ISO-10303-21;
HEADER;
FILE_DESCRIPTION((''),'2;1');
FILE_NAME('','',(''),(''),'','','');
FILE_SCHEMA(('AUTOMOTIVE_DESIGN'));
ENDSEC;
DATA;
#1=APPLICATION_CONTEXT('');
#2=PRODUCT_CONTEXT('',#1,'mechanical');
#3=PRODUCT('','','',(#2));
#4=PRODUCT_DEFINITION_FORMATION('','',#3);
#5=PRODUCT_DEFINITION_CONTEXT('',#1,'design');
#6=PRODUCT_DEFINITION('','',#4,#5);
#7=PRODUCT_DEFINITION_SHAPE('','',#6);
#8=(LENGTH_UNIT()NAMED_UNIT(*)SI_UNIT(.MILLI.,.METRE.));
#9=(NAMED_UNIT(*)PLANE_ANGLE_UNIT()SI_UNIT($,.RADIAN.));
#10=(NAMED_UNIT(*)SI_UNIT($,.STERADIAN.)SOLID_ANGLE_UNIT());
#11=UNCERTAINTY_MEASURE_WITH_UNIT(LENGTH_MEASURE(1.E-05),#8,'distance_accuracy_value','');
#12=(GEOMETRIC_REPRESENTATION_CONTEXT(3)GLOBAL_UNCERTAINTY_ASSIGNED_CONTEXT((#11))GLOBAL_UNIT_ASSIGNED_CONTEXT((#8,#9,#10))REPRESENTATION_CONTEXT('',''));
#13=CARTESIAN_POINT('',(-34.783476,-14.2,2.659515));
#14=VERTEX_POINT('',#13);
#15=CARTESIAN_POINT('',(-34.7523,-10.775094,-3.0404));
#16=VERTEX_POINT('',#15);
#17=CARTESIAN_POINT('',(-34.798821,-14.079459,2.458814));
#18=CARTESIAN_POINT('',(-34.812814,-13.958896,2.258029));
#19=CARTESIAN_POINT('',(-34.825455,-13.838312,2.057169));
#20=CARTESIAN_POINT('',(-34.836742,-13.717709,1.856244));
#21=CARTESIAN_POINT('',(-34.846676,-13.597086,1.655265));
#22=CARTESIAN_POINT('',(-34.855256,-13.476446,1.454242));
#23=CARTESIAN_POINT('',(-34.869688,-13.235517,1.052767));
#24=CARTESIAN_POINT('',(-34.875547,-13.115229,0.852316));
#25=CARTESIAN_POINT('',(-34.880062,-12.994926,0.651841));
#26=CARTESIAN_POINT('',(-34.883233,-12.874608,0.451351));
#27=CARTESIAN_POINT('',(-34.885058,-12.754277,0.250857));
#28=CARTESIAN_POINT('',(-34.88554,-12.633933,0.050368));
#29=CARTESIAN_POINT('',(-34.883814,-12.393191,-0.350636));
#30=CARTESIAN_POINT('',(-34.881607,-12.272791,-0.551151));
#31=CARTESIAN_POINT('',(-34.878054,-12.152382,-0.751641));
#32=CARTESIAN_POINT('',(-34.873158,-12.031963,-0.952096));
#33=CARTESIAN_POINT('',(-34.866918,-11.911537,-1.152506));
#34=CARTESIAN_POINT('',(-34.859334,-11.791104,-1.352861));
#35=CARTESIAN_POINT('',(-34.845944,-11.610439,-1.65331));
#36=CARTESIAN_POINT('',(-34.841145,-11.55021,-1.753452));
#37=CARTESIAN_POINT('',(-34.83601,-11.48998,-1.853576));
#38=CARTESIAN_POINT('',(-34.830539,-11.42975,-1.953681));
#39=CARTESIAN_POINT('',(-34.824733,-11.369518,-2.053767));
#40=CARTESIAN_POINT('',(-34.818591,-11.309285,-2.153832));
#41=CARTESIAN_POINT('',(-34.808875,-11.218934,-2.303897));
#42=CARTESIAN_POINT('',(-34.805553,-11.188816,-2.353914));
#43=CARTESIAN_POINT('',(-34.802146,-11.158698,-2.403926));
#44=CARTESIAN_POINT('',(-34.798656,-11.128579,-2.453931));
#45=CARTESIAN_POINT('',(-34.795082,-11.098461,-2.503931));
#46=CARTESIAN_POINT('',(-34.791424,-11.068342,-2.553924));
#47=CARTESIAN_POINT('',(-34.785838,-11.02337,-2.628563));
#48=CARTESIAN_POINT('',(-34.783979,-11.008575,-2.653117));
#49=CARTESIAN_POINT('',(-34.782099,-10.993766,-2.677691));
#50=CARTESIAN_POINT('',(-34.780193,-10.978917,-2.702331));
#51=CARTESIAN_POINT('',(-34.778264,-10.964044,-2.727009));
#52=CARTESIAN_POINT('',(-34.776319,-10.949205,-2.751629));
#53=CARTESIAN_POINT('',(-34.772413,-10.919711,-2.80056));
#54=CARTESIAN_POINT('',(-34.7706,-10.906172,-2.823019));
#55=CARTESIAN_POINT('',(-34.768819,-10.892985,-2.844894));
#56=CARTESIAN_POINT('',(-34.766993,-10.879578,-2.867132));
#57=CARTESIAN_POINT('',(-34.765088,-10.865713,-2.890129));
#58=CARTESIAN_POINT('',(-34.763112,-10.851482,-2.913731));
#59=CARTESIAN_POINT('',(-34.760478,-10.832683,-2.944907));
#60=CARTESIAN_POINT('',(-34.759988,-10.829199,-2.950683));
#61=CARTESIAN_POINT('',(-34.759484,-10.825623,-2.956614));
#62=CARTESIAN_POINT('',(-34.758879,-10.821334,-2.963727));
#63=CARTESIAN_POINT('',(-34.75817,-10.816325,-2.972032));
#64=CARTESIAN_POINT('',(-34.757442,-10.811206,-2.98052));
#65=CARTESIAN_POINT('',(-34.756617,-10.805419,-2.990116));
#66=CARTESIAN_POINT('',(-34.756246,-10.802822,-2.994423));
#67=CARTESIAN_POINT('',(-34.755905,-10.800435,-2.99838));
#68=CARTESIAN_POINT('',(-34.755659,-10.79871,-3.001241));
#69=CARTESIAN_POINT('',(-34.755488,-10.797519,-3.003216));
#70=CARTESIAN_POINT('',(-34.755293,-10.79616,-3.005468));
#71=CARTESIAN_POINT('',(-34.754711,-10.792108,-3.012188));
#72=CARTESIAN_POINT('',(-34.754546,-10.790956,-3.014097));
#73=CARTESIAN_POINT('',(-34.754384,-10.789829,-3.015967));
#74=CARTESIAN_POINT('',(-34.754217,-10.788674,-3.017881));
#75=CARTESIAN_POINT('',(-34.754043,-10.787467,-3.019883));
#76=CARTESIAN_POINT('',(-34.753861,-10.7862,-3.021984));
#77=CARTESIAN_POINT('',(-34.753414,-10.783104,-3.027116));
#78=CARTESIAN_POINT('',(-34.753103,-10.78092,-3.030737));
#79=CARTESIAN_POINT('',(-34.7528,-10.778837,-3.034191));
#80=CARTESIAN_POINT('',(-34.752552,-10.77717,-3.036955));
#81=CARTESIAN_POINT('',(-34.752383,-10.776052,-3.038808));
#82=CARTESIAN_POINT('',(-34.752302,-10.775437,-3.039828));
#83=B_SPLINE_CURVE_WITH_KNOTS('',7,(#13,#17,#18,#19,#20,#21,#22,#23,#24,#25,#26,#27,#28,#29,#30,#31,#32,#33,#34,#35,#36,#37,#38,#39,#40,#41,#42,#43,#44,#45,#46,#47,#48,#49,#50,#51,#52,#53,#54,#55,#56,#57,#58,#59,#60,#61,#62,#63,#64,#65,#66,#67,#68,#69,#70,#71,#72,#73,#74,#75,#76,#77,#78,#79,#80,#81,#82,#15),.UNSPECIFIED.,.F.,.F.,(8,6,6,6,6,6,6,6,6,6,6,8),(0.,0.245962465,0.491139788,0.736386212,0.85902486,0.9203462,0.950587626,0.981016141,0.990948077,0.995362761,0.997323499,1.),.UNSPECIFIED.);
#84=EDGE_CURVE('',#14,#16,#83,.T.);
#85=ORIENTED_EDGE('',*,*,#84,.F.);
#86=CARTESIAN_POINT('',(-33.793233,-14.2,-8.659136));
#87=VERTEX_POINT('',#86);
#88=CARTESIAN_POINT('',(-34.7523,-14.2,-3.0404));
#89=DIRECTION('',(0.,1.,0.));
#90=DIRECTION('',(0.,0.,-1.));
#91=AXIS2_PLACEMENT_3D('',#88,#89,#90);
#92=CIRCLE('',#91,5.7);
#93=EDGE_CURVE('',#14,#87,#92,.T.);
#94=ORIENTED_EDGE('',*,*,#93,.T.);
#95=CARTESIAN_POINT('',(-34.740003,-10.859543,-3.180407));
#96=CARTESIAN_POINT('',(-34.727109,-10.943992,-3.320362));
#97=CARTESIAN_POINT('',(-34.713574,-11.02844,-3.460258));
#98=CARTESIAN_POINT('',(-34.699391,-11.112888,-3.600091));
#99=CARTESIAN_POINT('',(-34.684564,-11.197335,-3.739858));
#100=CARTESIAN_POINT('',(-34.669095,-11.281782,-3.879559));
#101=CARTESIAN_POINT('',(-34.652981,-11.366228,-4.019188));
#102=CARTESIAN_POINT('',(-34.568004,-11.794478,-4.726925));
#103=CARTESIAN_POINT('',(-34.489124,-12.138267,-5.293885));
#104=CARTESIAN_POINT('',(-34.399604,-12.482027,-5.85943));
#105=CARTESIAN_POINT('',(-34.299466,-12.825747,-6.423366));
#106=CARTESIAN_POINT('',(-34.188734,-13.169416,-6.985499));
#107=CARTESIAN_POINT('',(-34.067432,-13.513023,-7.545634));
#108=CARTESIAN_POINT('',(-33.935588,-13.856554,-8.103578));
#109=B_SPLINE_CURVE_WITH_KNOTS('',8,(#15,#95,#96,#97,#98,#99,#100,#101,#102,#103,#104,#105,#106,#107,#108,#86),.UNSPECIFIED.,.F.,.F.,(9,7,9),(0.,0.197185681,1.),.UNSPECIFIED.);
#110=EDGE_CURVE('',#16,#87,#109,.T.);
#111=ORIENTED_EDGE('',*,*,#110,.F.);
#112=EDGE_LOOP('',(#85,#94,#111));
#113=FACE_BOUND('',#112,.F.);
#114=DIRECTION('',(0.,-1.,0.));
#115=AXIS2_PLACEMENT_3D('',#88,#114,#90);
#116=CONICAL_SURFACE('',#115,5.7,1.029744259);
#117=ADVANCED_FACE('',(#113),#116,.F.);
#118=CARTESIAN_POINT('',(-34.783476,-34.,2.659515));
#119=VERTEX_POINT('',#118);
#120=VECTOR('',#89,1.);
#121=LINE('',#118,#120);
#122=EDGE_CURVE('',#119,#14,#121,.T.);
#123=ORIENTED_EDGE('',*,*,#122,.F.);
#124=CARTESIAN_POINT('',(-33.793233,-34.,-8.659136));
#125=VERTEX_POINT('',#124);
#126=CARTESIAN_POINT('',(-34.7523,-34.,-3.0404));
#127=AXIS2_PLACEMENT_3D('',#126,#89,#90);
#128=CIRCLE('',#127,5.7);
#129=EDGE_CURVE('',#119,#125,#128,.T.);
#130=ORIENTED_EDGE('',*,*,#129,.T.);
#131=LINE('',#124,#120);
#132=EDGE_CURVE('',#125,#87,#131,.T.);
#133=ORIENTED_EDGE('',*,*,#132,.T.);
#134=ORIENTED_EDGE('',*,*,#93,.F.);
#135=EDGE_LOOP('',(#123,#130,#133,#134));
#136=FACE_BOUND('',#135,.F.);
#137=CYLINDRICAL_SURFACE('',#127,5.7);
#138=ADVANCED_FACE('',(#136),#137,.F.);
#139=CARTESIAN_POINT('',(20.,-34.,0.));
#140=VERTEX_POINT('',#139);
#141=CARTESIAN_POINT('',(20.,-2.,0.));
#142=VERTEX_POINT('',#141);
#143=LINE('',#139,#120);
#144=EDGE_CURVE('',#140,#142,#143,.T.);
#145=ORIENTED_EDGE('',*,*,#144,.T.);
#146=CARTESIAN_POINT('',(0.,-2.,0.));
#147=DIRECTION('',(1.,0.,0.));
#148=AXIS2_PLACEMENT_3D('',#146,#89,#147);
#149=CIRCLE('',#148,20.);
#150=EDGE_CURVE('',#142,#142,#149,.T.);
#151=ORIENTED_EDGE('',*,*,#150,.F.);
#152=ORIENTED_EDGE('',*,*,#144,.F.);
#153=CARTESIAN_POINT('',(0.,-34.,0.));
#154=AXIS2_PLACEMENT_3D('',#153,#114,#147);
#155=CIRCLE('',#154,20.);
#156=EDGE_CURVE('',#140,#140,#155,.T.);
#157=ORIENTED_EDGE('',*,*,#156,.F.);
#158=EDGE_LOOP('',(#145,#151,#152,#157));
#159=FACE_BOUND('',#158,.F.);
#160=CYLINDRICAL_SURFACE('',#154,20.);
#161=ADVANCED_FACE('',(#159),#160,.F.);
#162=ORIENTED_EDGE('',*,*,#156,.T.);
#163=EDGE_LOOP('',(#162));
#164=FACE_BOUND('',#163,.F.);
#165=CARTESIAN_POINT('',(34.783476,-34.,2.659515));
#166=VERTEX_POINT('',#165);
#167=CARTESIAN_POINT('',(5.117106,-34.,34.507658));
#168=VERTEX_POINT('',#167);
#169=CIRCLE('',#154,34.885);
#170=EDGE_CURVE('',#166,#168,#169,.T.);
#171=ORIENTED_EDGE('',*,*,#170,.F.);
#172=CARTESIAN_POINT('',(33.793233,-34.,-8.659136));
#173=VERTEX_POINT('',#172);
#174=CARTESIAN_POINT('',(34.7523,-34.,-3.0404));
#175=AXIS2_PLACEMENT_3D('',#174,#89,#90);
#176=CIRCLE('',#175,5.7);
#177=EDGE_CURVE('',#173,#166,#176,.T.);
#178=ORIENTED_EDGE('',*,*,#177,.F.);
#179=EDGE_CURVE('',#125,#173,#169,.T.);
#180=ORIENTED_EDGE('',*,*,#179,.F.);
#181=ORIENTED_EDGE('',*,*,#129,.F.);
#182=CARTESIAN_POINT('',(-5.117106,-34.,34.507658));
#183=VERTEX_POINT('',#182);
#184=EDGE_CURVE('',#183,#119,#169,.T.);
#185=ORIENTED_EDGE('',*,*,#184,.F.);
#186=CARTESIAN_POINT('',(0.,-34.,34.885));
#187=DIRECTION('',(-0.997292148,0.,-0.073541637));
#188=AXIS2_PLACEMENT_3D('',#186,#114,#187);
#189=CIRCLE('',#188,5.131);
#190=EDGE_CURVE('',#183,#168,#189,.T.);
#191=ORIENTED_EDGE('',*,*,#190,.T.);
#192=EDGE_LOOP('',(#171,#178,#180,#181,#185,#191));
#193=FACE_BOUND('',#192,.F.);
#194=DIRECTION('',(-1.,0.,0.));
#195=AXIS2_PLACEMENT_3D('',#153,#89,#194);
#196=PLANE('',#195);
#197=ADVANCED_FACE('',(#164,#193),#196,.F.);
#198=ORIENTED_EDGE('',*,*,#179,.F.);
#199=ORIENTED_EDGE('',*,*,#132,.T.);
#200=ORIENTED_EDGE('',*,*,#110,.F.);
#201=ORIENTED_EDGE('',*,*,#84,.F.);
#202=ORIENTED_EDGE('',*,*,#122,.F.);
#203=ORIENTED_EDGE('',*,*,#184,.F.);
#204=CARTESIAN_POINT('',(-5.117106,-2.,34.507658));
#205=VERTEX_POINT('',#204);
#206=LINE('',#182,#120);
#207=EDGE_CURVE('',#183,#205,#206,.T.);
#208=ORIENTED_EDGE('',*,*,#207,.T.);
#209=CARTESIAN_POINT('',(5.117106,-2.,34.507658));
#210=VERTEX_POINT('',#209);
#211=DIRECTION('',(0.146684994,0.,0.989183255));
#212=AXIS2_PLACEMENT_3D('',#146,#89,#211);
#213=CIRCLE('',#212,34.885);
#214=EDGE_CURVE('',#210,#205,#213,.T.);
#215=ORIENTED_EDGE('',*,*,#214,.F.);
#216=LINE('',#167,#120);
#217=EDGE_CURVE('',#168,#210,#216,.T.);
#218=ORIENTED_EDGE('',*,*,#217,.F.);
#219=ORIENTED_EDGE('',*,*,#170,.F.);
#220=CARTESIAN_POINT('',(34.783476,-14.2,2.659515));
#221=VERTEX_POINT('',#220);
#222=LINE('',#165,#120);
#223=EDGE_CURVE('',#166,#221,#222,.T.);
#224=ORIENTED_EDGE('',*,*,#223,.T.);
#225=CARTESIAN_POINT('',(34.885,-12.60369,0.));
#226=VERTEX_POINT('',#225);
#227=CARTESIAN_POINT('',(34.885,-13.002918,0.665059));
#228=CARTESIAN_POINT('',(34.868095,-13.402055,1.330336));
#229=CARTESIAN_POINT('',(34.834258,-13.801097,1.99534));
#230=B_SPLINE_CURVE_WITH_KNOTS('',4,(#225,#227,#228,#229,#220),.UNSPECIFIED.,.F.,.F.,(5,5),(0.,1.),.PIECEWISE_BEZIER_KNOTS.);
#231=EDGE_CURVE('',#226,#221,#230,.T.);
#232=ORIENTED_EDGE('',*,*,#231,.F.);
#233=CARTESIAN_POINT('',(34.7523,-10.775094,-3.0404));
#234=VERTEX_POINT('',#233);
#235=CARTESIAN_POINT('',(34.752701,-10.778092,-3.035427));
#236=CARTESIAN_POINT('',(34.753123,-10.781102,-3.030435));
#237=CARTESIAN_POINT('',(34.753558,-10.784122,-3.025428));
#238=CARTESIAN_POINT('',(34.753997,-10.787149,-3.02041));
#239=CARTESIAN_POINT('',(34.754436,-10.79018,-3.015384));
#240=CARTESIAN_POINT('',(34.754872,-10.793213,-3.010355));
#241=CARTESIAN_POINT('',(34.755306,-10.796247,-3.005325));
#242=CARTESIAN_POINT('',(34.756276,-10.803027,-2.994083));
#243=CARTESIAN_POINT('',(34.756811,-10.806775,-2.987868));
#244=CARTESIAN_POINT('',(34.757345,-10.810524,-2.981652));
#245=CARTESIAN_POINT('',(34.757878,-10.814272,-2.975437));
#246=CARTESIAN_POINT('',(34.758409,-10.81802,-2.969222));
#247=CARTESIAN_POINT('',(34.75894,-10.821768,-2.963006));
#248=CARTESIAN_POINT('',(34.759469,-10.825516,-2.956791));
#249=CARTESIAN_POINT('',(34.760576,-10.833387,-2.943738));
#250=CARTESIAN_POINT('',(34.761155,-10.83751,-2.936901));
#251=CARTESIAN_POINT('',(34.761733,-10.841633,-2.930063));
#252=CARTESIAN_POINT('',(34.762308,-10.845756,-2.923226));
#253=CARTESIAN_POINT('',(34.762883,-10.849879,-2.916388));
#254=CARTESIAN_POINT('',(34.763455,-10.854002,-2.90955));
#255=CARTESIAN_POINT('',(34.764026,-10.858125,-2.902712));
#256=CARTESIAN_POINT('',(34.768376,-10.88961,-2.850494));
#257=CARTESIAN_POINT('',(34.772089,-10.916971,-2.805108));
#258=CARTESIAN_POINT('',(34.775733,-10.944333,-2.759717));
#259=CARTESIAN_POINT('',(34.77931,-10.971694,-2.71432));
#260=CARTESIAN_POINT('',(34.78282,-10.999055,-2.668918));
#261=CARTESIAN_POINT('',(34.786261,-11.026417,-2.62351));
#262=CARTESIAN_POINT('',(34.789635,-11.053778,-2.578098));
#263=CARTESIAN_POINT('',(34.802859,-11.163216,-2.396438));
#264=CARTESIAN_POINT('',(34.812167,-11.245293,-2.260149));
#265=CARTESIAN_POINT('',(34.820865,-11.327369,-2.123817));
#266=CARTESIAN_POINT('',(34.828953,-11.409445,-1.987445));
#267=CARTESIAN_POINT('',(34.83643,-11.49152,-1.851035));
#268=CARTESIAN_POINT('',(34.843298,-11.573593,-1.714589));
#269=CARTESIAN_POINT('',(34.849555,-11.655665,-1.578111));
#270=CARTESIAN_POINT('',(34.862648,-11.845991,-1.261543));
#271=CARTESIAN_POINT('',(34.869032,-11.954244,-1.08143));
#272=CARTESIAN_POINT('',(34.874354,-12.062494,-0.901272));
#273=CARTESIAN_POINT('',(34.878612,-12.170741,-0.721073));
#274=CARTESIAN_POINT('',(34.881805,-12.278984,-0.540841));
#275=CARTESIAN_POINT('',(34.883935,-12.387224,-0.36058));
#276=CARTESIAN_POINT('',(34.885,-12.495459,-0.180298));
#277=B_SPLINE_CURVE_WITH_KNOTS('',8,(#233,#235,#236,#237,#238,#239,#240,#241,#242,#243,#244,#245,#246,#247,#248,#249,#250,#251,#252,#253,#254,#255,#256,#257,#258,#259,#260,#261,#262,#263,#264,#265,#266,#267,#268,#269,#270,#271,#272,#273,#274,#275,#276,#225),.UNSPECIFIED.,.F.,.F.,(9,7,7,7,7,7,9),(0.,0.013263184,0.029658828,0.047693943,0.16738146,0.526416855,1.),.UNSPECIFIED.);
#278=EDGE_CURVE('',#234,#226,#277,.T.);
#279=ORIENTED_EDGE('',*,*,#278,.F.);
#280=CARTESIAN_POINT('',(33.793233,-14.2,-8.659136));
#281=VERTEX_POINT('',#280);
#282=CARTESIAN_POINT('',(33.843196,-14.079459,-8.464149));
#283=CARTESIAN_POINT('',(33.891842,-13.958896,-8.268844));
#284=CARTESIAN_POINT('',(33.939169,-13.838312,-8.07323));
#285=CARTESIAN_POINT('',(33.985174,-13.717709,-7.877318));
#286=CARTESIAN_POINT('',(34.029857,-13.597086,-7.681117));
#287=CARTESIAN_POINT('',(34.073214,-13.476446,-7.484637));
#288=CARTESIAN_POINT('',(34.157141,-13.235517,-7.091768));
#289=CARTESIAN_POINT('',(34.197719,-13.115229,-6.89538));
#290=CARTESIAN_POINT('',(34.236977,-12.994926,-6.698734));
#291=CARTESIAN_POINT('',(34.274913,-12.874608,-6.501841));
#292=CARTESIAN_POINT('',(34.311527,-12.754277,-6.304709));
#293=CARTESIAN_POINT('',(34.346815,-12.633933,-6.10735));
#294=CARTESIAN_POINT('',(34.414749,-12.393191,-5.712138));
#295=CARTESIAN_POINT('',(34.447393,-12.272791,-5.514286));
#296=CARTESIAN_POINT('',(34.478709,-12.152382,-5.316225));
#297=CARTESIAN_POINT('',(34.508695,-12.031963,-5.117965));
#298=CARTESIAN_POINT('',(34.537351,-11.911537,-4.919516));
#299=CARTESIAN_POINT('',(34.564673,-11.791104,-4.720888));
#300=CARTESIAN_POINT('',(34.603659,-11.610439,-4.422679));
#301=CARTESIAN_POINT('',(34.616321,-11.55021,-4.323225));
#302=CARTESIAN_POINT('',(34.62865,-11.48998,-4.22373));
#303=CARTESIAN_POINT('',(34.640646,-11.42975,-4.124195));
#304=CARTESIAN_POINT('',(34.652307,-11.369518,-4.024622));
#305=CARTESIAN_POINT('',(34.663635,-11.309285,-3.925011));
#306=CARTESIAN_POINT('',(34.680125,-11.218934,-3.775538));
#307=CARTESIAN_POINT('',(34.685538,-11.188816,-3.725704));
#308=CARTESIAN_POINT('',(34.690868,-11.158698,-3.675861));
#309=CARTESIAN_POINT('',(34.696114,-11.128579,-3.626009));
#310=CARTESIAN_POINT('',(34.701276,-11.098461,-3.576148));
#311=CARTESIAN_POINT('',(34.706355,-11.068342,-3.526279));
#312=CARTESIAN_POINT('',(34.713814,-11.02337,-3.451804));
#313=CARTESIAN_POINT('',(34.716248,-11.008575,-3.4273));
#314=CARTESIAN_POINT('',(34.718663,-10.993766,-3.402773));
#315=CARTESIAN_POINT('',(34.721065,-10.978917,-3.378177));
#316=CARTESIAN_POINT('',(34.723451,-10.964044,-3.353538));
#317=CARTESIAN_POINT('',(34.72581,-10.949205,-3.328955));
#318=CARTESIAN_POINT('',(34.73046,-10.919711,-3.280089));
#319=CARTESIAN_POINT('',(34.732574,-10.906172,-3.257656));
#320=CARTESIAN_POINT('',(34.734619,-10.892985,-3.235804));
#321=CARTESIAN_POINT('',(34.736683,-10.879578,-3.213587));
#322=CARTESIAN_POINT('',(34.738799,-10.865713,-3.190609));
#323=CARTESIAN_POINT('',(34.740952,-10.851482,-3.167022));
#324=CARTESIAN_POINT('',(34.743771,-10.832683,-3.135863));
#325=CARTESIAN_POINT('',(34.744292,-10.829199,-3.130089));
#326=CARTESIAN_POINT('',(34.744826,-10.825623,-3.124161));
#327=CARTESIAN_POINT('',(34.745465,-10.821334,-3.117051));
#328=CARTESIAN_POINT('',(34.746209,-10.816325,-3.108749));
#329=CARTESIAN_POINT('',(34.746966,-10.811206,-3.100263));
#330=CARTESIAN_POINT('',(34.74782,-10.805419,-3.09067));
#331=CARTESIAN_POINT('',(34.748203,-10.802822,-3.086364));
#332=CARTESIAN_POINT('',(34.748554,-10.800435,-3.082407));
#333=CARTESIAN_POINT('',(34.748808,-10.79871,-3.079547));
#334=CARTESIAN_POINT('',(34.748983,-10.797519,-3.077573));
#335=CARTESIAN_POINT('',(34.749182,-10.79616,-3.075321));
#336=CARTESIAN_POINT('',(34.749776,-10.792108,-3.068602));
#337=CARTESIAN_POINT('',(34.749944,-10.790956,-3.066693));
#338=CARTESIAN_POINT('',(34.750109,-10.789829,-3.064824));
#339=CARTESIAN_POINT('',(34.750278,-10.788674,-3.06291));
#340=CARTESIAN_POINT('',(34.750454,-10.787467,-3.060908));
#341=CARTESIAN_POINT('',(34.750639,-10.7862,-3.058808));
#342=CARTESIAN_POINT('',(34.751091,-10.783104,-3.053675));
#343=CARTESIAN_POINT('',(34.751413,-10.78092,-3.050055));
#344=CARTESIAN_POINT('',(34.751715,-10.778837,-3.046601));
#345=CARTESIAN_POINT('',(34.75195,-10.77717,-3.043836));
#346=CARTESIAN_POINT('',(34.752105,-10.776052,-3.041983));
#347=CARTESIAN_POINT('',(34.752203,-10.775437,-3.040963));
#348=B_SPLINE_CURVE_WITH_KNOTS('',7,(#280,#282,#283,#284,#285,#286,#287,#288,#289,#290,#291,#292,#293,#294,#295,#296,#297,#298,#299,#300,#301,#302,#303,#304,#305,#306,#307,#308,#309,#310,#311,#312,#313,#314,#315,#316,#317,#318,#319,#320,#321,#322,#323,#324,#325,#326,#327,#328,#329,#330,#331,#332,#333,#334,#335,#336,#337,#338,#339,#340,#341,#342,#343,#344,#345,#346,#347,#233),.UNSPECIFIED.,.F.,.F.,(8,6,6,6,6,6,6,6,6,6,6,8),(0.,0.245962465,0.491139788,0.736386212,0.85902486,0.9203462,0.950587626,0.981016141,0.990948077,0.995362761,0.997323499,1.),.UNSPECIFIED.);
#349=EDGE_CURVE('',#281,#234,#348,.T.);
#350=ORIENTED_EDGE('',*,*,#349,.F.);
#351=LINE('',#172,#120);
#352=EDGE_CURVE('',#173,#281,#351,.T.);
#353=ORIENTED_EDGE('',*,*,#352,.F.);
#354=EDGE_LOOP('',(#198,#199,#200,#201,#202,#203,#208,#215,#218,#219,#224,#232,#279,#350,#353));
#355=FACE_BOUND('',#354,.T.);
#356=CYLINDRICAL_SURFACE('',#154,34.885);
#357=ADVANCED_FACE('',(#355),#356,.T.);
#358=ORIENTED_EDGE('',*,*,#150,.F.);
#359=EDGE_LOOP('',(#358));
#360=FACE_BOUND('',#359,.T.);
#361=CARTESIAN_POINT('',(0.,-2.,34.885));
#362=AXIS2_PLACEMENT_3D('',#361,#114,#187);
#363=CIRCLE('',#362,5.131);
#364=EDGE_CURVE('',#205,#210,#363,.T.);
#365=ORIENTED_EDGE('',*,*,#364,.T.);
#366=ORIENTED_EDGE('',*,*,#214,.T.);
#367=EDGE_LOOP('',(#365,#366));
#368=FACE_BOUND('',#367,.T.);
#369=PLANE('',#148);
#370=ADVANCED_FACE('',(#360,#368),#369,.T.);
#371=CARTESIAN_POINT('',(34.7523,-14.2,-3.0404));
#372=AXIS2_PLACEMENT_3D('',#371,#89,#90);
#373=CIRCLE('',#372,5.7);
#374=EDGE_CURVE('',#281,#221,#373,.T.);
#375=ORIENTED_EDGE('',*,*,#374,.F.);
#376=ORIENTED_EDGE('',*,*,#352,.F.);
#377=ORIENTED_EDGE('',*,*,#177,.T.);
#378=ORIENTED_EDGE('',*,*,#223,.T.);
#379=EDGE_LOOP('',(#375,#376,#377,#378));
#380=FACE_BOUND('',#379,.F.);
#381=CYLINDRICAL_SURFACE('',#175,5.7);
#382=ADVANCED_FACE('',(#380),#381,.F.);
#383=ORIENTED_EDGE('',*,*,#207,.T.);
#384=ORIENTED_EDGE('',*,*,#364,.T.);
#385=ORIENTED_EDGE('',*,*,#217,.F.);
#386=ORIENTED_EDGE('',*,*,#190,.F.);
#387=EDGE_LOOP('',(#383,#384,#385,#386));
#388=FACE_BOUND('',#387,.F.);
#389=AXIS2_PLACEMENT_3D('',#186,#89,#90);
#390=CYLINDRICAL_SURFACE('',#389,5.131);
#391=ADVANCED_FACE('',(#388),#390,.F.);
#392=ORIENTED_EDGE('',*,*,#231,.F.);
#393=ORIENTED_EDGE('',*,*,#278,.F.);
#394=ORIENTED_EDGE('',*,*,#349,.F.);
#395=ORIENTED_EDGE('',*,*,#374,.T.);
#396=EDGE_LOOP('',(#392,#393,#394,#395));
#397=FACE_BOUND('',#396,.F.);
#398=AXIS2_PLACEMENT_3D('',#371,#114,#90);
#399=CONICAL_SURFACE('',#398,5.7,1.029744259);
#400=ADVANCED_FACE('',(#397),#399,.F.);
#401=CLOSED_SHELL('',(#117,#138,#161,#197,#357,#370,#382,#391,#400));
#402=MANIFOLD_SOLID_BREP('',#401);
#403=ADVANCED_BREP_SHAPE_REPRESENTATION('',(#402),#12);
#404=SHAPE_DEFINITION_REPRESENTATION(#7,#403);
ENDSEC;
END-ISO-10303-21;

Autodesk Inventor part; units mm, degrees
ref_plane "YZ Plane" through (0, 0, 0) normal (1, 0, 0) x (0, 1, 0)
ref_plane "XZ Plane" through (0, 0, 0) normal (0, 1, 0) x (-1, 0, 0)
ref_plane "XY Plane" through (0, 0, 0) normal (0, 0, 1) x (1, 0, 0)
sketch "Schizzo1" plane through (0, 0, 0) normal (0, 1, 0) x (-1, 0, 0)
  circle A0 centre (0, 0) radius 15
  circle A1 centre (0, 0) radius 40
  dimension "d0" = 30
  dimension "d1" = 80
extrude "Estrusione1" add sketch "Schizzo1" against normal blind 34
sketch "Schizzo2" plane through (0, -34, 0) normal (0, -1, 0) x (1, 0, 0)
  circle A0 centre (0, 0) radius 15
  circle A1 centre (0, 0) radius 42.5
  dimension "d4" = 85
extrude "Estrusione2" add sketch "Schizzo2" against normal blind 34
sketch "Schizzo3" plane through (0, -34, 0) normal (0, -1, 0) x (1, 0, 0)
  circle A0 centre (0, 0) radius 34.885
  line L0 (0, 41.5801) -> (0, 0)
  line L1 (0, 0) -> (-42.3383, -3.7041)
  circle A1 centre (0, 0) radius 42.5 projected
  line L2 (42.3383, -3.7041) -> (0, 0)
  point P0 (-34.7523, -3.0404)
  point P1 (34.7523, -3.0404)
  dimension "d7" = 69.77
  dimension "d8" = 95
  dimension "d9" = 95
hole "Foro1" at (-34.7523, -34, -3.0404) at (34.7523, -34, -3.0404) direction (0, 1, 0) diameter 11.4 depth 19.8 tip angle 118 clearance for "Bullone a testa esagonale" size "7/16" standard "ANSI Unificate - Filettature"
sketch "Schizzo4" plane through (0, -34, 0) normal (0, -1, 0) x (1, 0, 0)
  circle A0 centre (0, 0) radius 34.885
  point P0 (0, 34.885)
  dimension "d17" = 69.77
hole "Foro2" at (0, -34, 34.885) direction (0, 1, 0) diameter 10.262 depth 32 tip angle 118 thread size "7/16-32 UN" class "2B" standard "ANSI Unified Screw Threads"
sketch "Schizzo5" plane through (0, -34, 0) normal (0, -1, 0) x (1, 0, 0)
  circle A0 centre (0, 0) radius 20
  dimension "d25" = 40
extrude "Estrusione3" cut sketch "Schizzo5" against normal blind 34
sketch "Schizzo6" plane through (0, 0, 0) normal (0, 1, 0) x (1, 0, 0)
  circle A0 centre (0, 0) radius 20 projected
  circle A1 centre (0, -34.885) radius 1.8024 projected
  circle A2 centre (0, 0) radius 42.5 projected
extrude "Estrusione4" cut sketch "Schizzo6" against normal blind 2
sketch "Schizzo7" plane through (0, -34, 0) normal (0, -1, 0) x (1, 0, 0)
  circle A0 centre (0, 0) radius 34.885
  circle A1 centre (0, 0) radius 42.5
  dimension "d30" = 69.77
extrude "Estrusione5" cut sketch "Schizzo7" against normal blind 32
properties part number "sfacciatura + tornitura piana interna ed esterna" material "Ferro, Ghisa grigia ASTM A48 Grado 20"
